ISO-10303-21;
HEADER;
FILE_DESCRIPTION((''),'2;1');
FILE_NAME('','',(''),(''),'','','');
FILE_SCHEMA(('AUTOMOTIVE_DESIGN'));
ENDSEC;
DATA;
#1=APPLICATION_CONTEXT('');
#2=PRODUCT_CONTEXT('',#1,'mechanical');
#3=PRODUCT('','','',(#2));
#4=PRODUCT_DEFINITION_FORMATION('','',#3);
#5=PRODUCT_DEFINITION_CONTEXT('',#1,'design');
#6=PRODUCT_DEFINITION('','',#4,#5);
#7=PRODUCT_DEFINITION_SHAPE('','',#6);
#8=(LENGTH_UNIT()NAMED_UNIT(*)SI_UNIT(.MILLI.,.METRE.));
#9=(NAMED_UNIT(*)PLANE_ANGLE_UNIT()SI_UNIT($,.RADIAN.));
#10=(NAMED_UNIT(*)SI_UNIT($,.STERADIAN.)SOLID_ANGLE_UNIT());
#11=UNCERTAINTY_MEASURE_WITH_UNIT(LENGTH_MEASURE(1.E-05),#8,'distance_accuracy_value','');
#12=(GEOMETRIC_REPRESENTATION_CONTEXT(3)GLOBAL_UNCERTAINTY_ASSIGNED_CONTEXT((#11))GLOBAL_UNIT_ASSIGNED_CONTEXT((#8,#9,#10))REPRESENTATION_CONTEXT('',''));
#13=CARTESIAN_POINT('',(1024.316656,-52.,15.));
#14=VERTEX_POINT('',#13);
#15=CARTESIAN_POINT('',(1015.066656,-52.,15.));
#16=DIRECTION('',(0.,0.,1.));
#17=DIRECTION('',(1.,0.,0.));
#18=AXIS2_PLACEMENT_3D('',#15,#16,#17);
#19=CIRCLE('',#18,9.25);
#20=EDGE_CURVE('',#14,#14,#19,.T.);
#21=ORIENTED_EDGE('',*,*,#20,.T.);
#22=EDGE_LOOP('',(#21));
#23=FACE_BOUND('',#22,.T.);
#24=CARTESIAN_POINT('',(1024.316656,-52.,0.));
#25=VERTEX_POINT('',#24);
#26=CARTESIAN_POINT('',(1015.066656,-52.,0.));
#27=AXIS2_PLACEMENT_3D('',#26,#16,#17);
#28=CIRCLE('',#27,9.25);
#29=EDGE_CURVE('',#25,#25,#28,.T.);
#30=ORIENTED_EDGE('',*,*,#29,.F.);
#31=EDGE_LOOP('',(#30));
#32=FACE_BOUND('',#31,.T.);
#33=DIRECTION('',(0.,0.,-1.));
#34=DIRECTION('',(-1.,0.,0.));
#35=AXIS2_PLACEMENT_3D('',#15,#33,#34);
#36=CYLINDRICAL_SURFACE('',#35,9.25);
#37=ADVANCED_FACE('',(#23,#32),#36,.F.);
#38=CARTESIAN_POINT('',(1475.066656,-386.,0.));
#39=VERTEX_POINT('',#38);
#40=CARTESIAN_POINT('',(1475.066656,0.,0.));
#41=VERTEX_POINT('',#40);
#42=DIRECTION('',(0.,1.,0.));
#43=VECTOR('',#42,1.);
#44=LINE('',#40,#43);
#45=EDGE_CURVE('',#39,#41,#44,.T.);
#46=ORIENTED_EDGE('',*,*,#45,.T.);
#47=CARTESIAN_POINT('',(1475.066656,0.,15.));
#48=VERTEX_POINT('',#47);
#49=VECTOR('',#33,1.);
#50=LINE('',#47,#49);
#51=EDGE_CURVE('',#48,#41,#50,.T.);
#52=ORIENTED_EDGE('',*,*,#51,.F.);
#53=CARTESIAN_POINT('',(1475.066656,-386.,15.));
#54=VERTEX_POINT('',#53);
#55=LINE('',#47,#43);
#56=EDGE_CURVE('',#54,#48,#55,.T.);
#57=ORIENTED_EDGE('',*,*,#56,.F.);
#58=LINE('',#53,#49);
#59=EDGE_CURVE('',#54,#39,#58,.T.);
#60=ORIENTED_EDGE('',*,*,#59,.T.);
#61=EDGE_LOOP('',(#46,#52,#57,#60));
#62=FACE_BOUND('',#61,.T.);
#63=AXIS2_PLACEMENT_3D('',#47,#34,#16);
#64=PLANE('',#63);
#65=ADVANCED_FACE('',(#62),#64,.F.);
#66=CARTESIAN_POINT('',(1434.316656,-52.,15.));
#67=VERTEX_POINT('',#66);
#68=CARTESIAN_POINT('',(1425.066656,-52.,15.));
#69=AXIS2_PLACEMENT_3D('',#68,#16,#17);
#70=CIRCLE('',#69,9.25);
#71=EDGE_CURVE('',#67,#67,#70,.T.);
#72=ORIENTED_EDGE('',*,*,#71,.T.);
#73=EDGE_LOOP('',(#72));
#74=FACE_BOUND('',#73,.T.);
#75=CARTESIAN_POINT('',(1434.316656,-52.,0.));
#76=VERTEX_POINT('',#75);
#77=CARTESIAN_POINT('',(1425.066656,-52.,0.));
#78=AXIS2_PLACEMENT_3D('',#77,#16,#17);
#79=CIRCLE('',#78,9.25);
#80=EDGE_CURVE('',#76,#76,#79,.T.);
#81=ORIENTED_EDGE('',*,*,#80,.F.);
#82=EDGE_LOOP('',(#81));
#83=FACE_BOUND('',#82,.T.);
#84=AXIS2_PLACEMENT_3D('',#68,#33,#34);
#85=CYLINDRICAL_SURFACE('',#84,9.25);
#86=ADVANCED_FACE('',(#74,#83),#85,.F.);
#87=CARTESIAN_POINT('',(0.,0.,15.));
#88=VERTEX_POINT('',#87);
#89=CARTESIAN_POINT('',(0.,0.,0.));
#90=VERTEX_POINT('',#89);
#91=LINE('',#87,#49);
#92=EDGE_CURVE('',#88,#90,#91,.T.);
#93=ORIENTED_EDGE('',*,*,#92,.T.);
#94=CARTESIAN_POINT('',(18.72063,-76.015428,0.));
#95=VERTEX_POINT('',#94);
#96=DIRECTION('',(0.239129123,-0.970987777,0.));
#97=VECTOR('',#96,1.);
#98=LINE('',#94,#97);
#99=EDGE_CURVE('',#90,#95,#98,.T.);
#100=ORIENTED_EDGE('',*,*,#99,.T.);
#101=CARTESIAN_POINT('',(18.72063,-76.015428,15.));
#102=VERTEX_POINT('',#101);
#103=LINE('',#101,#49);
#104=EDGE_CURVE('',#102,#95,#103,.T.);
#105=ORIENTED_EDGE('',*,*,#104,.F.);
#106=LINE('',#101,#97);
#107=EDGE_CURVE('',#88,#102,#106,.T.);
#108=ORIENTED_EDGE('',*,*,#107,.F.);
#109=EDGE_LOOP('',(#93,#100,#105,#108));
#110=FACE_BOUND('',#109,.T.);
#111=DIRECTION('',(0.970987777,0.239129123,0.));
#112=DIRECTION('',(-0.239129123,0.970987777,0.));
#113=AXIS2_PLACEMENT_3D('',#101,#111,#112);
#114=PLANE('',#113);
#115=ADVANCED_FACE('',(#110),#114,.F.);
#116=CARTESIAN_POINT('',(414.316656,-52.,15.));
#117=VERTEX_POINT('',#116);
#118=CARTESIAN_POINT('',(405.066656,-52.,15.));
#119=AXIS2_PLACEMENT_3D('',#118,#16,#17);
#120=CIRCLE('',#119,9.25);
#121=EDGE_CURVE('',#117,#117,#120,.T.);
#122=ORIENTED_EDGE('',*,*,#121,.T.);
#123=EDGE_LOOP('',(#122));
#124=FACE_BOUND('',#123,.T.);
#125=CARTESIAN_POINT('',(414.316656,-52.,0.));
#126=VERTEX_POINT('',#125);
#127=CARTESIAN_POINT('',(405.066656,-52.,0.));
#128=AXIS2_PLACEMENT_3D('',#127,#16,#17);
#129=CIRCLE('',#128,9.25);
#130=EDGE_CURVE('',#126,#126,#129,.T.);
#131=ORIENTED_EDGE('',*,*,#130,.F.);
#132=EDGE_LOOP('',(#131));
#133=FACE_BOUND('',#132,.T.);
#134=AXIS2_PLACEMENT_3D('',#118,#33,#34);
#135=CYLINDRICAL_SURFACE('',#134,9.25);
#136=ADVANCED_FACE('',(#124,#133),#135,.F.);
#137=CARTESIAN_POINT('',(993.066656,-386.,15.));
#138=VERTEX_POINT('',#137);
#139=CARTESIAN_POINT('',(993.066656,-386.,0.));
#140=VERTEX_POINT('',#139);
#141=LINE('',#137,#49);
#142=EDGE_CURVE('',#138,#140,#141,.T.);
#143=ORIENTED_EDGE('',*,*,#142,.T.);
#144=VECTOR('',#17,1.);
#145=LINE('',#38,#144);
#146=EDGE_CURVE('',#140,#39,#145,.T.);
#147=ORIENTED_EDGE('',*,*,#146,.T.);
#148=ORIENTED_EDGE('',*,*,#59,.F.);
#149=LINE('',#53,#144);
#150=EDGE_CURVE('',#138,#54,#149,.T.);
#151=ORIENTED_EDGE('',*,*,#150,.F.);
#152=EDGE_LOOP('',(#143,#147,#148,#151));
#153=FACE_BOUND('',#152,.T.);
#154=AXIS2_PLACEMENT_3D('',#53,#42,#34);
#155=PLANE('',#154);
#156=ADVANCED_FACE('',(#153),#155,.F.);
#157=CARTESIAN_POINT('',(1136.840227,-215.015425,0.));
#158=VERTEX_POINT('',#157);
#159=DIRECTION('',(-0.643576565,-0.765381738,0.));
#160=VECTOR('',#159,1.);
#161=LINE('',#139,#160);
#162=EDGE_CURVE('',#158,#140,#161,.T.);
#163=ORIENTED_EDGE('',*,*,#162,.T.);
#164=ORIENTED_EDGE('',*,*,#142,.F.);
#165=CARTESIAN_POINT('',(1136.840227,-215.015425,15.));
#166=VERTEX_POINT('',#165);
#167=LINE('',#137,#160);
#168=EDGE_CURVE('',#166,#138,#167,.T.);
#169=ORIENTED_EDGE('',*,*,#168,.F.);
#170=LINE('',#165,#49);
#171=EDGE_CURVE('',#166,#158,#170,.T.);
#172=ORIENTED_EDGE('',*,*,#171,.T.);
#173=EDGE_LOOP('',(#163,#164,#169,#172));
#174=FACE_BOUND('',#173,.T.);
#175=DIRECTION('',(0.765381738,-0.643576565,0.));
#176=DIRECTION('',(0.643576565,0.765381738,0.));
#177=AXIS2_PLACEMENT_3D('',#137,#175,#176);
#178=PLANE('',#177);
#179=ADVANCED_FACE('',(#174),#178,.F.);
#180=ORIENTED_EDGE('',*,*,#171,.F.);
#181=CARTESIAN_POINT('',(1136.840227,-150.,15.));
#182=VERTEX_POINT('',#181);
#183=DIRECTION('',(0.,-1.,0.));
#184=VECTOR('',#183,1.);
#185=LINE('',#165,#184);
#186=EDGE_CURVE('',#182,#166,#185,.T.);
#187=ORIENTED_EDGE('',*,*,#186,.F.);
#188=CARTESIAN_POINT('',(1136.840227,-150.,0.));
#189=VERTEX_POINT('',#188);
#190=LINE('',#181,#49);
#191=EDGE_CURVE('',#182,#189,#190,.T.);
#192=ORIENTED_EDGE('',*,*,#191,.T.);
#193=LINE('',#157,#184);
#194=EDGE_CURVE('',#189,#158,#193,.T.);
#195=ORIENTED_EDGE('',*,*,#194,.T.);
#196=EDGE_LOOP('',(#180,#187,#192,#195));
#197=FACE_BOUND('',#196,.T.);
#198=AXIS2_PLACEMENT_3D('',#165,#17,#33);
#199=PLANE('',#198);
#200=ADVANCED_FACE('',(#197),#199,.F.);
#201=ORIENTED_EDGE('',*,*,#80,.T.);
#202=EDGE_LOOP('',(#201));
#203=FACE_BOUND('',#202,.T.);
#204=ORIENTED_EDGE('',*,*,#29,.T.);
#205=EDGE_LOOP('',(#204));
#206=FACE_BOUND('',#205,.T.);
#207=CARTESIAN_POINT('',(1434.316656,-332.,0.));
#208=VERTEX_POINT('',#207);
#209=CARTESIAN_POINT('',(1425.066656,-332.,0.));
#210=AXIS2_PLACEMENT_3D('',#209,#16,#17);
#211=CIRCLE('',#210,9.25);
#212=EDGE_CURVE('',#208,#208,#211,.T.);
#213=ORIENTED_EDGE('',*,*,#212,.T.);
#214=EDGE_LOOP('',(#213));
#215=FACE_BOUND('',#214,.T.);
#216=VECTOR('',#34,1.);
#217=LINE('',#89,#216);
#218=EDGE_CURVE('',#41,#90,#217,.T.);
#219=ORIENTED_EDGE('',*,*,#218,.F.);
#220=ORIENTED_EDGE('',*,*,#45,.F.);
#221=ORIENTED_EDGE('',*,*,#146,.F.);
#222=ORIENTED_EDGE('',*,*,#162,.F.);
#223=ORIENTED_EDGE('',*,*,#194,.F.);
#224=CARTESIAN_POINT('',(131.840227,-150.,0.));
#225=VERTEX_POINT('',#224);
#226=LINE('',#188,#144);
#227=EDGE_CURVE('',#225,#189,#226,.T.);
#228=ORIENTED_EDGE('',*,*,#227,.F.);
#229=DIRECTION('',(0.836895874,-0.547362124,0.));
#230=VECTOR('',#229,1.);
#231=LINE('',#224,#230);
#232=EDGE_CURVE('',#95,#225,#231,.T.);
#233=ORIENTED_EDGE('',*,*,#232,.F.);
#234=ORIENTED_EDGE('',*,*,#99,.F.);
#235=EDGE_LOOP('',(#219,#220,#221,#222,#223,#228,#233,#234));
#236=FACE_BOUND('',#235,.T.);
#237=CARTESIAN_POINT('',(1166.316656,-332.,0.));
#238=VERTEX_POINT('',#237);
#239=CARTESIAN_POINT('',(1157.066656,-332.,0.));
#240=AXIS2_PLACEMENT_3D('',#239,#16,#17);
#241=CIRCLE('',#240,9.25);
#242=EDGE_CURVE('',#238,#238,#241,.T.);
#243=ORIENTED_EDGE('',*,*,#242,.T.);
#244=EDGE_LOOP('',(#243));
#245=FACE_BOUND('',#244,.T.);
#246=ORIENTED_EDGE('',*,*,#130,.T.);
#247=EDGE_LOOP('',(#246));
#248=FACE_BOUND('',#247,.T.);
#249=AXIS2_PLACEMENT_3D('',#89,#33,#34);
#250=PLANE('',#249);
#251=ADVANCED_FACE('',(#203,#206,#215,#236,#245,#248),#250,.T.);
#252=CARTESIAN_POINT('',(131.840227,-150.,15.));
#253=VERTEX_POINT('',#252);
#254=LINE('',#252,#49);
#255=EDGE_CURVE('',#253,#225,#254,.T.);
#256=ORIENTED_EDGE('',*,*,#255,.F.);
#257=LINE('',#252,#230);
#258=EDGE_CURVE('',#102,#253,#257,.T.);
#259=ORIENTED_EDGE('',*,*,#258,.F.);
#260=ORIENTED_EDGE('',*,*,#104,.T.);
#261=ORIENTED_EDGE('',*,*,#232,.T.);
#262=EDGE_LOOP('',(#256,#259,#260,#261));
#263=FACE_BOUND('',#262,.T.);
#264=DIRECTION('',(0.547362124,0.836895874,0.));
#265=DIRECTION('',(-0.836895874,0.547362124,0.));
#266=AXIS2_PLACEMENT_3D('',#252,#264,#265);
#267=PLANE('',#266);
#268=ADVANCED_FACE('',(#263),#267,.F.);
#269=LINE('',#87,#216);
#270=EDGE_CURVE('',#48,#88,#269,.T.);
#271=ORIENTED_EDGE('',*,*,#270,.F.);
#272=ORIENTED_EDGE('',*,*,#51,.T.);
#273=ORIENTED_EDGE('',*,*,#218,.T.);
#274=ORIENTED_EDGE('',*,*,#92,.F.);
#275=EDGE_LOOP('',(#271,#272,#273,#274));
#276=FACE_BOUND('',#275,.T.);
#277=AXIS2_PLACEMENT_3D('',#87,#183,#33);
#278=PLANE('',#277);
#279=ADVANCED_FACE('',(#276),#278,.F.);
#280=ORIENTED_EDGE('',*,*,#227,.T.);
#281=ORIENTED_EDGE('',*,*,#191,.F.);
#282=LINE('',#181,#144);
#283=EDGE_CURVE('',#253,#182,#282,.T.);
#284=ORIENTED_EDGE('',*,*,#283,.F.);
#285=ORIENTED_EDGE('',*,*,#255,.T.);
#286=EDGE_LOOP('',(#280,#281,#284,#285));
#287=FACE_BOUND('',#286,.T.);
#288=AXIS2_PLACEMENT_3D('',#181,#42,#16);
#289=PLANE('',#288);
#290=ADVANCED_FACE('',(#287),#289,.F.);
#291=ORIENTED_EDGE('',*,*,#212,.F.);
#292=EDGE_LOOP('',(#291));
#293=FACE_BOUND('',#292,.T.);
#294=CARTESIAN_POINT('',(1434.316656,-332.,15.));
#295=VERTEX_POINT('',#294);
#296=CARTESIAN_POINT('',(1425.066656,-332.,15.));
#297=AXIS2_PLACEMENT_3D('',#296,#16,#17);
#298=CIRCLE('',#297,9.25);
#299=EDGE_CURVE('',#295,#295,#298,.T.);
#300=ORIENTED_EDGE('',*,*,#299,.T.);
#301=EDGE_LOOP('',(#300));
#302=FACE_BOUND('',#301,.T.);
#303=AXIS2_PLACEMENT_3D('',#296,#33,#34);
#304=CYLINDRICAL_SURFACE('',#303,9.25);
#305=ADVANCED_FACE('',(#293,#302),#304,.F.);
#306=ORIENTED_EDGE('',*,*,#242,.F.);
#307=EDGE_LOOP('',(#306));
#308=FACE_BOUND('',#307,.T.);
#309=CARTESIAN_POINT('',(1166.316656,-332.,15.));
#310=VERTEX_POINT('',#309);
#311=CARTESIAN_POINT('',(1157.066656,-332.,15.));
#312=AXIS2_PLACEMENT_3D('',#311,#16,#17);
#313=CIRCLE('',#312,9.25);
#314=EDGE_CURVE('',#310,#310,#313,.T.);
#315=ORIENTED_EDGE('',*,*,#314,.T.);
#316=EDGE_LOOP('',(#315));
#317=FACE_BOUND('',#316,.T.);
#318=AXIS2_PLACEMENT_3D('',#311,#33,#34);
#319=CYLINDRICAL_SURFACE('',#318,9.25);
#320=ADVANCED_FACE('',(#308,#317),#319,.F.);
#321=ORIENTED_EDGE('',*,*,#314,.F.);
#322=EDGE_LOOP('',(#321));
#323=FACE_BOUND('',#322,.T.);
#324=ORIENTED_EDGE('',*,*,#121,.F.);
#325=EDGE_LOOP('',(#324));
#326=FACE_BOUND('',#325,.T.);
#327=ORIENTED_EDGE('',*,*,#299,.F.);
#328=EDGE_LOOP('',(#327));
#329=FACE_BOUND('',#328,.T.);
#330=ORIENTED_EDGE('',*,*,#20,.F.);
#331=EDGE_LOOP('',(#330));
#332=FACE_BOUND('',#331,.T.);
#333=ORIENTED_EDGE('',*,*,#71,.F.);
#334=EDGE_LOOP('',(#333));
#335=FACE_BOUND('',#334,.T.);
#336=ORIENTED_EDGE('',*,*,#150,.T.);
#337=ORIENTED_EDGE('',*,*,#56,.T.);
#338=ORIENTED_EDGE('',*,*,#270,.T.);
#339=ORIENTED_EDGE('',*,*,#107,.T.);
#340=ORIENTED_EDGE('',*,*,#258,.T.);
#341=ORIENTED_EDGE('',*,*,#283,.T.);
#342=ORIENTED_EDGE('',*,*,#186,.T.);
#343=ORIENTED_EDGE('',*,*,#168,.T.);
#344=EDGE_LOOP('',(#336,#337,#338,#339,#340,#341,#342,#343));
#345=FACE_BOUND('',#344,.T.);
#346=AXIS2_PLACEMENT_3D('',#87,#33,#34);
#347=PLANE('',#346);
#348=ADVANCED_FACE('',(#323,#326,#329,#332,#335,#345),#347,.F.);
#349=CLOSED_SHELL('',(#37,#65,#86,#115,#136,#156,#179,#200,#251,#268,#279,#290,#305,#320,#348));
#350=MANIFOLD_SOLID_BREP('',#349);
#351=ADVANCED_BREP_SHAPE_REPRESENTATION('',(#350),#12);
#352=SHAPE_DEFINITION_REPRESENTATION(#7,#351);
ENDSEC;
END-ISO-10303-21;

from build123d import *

# Parameters (mm, degrees)
IZIM1_R            = 9.25
TABAN_FLAN_1_DEPTH = 15


# Sheet-metal steps are written as plain solids
with BuildPart() as part:
    # Çizim1 → Taban-Flanş1 (new body)
    with BuildSketch(Plane.XY):
        Polygon((0, 0), (1475.066656138, 0), (1475.066656138, -386), (993.066656138, -386), (1136.84022729, -215.015424523), (1136.84022729, -150), (131.84022729, -150), (18.720629706, -76.015427794), align=None)
        with Locations((405.066656138, -52)):
            Circle(IZIM1_R, mode=Mode.SUBTRACT)
        with Locations((1015.066656138, -52)):
            Circle(IZIM1_R, mode=Mode.SUBTRACT)
        with Locations((1425.066656138, -52)):
            Circle(IZIM1_R, mode=Mode.SUBTRACT)
        with Locations((1425.066656138, -332)):
            Circle(IZIM1_R, mode=Mode.SUBTRACT)
        with Locations((1157.066656138, -332)):
            Circle(IZIM1_R, mode=Mode.SUBTRACT)
    extrude(amount=TABAN_FLAN_1_DEPTH)


solid = part.part
